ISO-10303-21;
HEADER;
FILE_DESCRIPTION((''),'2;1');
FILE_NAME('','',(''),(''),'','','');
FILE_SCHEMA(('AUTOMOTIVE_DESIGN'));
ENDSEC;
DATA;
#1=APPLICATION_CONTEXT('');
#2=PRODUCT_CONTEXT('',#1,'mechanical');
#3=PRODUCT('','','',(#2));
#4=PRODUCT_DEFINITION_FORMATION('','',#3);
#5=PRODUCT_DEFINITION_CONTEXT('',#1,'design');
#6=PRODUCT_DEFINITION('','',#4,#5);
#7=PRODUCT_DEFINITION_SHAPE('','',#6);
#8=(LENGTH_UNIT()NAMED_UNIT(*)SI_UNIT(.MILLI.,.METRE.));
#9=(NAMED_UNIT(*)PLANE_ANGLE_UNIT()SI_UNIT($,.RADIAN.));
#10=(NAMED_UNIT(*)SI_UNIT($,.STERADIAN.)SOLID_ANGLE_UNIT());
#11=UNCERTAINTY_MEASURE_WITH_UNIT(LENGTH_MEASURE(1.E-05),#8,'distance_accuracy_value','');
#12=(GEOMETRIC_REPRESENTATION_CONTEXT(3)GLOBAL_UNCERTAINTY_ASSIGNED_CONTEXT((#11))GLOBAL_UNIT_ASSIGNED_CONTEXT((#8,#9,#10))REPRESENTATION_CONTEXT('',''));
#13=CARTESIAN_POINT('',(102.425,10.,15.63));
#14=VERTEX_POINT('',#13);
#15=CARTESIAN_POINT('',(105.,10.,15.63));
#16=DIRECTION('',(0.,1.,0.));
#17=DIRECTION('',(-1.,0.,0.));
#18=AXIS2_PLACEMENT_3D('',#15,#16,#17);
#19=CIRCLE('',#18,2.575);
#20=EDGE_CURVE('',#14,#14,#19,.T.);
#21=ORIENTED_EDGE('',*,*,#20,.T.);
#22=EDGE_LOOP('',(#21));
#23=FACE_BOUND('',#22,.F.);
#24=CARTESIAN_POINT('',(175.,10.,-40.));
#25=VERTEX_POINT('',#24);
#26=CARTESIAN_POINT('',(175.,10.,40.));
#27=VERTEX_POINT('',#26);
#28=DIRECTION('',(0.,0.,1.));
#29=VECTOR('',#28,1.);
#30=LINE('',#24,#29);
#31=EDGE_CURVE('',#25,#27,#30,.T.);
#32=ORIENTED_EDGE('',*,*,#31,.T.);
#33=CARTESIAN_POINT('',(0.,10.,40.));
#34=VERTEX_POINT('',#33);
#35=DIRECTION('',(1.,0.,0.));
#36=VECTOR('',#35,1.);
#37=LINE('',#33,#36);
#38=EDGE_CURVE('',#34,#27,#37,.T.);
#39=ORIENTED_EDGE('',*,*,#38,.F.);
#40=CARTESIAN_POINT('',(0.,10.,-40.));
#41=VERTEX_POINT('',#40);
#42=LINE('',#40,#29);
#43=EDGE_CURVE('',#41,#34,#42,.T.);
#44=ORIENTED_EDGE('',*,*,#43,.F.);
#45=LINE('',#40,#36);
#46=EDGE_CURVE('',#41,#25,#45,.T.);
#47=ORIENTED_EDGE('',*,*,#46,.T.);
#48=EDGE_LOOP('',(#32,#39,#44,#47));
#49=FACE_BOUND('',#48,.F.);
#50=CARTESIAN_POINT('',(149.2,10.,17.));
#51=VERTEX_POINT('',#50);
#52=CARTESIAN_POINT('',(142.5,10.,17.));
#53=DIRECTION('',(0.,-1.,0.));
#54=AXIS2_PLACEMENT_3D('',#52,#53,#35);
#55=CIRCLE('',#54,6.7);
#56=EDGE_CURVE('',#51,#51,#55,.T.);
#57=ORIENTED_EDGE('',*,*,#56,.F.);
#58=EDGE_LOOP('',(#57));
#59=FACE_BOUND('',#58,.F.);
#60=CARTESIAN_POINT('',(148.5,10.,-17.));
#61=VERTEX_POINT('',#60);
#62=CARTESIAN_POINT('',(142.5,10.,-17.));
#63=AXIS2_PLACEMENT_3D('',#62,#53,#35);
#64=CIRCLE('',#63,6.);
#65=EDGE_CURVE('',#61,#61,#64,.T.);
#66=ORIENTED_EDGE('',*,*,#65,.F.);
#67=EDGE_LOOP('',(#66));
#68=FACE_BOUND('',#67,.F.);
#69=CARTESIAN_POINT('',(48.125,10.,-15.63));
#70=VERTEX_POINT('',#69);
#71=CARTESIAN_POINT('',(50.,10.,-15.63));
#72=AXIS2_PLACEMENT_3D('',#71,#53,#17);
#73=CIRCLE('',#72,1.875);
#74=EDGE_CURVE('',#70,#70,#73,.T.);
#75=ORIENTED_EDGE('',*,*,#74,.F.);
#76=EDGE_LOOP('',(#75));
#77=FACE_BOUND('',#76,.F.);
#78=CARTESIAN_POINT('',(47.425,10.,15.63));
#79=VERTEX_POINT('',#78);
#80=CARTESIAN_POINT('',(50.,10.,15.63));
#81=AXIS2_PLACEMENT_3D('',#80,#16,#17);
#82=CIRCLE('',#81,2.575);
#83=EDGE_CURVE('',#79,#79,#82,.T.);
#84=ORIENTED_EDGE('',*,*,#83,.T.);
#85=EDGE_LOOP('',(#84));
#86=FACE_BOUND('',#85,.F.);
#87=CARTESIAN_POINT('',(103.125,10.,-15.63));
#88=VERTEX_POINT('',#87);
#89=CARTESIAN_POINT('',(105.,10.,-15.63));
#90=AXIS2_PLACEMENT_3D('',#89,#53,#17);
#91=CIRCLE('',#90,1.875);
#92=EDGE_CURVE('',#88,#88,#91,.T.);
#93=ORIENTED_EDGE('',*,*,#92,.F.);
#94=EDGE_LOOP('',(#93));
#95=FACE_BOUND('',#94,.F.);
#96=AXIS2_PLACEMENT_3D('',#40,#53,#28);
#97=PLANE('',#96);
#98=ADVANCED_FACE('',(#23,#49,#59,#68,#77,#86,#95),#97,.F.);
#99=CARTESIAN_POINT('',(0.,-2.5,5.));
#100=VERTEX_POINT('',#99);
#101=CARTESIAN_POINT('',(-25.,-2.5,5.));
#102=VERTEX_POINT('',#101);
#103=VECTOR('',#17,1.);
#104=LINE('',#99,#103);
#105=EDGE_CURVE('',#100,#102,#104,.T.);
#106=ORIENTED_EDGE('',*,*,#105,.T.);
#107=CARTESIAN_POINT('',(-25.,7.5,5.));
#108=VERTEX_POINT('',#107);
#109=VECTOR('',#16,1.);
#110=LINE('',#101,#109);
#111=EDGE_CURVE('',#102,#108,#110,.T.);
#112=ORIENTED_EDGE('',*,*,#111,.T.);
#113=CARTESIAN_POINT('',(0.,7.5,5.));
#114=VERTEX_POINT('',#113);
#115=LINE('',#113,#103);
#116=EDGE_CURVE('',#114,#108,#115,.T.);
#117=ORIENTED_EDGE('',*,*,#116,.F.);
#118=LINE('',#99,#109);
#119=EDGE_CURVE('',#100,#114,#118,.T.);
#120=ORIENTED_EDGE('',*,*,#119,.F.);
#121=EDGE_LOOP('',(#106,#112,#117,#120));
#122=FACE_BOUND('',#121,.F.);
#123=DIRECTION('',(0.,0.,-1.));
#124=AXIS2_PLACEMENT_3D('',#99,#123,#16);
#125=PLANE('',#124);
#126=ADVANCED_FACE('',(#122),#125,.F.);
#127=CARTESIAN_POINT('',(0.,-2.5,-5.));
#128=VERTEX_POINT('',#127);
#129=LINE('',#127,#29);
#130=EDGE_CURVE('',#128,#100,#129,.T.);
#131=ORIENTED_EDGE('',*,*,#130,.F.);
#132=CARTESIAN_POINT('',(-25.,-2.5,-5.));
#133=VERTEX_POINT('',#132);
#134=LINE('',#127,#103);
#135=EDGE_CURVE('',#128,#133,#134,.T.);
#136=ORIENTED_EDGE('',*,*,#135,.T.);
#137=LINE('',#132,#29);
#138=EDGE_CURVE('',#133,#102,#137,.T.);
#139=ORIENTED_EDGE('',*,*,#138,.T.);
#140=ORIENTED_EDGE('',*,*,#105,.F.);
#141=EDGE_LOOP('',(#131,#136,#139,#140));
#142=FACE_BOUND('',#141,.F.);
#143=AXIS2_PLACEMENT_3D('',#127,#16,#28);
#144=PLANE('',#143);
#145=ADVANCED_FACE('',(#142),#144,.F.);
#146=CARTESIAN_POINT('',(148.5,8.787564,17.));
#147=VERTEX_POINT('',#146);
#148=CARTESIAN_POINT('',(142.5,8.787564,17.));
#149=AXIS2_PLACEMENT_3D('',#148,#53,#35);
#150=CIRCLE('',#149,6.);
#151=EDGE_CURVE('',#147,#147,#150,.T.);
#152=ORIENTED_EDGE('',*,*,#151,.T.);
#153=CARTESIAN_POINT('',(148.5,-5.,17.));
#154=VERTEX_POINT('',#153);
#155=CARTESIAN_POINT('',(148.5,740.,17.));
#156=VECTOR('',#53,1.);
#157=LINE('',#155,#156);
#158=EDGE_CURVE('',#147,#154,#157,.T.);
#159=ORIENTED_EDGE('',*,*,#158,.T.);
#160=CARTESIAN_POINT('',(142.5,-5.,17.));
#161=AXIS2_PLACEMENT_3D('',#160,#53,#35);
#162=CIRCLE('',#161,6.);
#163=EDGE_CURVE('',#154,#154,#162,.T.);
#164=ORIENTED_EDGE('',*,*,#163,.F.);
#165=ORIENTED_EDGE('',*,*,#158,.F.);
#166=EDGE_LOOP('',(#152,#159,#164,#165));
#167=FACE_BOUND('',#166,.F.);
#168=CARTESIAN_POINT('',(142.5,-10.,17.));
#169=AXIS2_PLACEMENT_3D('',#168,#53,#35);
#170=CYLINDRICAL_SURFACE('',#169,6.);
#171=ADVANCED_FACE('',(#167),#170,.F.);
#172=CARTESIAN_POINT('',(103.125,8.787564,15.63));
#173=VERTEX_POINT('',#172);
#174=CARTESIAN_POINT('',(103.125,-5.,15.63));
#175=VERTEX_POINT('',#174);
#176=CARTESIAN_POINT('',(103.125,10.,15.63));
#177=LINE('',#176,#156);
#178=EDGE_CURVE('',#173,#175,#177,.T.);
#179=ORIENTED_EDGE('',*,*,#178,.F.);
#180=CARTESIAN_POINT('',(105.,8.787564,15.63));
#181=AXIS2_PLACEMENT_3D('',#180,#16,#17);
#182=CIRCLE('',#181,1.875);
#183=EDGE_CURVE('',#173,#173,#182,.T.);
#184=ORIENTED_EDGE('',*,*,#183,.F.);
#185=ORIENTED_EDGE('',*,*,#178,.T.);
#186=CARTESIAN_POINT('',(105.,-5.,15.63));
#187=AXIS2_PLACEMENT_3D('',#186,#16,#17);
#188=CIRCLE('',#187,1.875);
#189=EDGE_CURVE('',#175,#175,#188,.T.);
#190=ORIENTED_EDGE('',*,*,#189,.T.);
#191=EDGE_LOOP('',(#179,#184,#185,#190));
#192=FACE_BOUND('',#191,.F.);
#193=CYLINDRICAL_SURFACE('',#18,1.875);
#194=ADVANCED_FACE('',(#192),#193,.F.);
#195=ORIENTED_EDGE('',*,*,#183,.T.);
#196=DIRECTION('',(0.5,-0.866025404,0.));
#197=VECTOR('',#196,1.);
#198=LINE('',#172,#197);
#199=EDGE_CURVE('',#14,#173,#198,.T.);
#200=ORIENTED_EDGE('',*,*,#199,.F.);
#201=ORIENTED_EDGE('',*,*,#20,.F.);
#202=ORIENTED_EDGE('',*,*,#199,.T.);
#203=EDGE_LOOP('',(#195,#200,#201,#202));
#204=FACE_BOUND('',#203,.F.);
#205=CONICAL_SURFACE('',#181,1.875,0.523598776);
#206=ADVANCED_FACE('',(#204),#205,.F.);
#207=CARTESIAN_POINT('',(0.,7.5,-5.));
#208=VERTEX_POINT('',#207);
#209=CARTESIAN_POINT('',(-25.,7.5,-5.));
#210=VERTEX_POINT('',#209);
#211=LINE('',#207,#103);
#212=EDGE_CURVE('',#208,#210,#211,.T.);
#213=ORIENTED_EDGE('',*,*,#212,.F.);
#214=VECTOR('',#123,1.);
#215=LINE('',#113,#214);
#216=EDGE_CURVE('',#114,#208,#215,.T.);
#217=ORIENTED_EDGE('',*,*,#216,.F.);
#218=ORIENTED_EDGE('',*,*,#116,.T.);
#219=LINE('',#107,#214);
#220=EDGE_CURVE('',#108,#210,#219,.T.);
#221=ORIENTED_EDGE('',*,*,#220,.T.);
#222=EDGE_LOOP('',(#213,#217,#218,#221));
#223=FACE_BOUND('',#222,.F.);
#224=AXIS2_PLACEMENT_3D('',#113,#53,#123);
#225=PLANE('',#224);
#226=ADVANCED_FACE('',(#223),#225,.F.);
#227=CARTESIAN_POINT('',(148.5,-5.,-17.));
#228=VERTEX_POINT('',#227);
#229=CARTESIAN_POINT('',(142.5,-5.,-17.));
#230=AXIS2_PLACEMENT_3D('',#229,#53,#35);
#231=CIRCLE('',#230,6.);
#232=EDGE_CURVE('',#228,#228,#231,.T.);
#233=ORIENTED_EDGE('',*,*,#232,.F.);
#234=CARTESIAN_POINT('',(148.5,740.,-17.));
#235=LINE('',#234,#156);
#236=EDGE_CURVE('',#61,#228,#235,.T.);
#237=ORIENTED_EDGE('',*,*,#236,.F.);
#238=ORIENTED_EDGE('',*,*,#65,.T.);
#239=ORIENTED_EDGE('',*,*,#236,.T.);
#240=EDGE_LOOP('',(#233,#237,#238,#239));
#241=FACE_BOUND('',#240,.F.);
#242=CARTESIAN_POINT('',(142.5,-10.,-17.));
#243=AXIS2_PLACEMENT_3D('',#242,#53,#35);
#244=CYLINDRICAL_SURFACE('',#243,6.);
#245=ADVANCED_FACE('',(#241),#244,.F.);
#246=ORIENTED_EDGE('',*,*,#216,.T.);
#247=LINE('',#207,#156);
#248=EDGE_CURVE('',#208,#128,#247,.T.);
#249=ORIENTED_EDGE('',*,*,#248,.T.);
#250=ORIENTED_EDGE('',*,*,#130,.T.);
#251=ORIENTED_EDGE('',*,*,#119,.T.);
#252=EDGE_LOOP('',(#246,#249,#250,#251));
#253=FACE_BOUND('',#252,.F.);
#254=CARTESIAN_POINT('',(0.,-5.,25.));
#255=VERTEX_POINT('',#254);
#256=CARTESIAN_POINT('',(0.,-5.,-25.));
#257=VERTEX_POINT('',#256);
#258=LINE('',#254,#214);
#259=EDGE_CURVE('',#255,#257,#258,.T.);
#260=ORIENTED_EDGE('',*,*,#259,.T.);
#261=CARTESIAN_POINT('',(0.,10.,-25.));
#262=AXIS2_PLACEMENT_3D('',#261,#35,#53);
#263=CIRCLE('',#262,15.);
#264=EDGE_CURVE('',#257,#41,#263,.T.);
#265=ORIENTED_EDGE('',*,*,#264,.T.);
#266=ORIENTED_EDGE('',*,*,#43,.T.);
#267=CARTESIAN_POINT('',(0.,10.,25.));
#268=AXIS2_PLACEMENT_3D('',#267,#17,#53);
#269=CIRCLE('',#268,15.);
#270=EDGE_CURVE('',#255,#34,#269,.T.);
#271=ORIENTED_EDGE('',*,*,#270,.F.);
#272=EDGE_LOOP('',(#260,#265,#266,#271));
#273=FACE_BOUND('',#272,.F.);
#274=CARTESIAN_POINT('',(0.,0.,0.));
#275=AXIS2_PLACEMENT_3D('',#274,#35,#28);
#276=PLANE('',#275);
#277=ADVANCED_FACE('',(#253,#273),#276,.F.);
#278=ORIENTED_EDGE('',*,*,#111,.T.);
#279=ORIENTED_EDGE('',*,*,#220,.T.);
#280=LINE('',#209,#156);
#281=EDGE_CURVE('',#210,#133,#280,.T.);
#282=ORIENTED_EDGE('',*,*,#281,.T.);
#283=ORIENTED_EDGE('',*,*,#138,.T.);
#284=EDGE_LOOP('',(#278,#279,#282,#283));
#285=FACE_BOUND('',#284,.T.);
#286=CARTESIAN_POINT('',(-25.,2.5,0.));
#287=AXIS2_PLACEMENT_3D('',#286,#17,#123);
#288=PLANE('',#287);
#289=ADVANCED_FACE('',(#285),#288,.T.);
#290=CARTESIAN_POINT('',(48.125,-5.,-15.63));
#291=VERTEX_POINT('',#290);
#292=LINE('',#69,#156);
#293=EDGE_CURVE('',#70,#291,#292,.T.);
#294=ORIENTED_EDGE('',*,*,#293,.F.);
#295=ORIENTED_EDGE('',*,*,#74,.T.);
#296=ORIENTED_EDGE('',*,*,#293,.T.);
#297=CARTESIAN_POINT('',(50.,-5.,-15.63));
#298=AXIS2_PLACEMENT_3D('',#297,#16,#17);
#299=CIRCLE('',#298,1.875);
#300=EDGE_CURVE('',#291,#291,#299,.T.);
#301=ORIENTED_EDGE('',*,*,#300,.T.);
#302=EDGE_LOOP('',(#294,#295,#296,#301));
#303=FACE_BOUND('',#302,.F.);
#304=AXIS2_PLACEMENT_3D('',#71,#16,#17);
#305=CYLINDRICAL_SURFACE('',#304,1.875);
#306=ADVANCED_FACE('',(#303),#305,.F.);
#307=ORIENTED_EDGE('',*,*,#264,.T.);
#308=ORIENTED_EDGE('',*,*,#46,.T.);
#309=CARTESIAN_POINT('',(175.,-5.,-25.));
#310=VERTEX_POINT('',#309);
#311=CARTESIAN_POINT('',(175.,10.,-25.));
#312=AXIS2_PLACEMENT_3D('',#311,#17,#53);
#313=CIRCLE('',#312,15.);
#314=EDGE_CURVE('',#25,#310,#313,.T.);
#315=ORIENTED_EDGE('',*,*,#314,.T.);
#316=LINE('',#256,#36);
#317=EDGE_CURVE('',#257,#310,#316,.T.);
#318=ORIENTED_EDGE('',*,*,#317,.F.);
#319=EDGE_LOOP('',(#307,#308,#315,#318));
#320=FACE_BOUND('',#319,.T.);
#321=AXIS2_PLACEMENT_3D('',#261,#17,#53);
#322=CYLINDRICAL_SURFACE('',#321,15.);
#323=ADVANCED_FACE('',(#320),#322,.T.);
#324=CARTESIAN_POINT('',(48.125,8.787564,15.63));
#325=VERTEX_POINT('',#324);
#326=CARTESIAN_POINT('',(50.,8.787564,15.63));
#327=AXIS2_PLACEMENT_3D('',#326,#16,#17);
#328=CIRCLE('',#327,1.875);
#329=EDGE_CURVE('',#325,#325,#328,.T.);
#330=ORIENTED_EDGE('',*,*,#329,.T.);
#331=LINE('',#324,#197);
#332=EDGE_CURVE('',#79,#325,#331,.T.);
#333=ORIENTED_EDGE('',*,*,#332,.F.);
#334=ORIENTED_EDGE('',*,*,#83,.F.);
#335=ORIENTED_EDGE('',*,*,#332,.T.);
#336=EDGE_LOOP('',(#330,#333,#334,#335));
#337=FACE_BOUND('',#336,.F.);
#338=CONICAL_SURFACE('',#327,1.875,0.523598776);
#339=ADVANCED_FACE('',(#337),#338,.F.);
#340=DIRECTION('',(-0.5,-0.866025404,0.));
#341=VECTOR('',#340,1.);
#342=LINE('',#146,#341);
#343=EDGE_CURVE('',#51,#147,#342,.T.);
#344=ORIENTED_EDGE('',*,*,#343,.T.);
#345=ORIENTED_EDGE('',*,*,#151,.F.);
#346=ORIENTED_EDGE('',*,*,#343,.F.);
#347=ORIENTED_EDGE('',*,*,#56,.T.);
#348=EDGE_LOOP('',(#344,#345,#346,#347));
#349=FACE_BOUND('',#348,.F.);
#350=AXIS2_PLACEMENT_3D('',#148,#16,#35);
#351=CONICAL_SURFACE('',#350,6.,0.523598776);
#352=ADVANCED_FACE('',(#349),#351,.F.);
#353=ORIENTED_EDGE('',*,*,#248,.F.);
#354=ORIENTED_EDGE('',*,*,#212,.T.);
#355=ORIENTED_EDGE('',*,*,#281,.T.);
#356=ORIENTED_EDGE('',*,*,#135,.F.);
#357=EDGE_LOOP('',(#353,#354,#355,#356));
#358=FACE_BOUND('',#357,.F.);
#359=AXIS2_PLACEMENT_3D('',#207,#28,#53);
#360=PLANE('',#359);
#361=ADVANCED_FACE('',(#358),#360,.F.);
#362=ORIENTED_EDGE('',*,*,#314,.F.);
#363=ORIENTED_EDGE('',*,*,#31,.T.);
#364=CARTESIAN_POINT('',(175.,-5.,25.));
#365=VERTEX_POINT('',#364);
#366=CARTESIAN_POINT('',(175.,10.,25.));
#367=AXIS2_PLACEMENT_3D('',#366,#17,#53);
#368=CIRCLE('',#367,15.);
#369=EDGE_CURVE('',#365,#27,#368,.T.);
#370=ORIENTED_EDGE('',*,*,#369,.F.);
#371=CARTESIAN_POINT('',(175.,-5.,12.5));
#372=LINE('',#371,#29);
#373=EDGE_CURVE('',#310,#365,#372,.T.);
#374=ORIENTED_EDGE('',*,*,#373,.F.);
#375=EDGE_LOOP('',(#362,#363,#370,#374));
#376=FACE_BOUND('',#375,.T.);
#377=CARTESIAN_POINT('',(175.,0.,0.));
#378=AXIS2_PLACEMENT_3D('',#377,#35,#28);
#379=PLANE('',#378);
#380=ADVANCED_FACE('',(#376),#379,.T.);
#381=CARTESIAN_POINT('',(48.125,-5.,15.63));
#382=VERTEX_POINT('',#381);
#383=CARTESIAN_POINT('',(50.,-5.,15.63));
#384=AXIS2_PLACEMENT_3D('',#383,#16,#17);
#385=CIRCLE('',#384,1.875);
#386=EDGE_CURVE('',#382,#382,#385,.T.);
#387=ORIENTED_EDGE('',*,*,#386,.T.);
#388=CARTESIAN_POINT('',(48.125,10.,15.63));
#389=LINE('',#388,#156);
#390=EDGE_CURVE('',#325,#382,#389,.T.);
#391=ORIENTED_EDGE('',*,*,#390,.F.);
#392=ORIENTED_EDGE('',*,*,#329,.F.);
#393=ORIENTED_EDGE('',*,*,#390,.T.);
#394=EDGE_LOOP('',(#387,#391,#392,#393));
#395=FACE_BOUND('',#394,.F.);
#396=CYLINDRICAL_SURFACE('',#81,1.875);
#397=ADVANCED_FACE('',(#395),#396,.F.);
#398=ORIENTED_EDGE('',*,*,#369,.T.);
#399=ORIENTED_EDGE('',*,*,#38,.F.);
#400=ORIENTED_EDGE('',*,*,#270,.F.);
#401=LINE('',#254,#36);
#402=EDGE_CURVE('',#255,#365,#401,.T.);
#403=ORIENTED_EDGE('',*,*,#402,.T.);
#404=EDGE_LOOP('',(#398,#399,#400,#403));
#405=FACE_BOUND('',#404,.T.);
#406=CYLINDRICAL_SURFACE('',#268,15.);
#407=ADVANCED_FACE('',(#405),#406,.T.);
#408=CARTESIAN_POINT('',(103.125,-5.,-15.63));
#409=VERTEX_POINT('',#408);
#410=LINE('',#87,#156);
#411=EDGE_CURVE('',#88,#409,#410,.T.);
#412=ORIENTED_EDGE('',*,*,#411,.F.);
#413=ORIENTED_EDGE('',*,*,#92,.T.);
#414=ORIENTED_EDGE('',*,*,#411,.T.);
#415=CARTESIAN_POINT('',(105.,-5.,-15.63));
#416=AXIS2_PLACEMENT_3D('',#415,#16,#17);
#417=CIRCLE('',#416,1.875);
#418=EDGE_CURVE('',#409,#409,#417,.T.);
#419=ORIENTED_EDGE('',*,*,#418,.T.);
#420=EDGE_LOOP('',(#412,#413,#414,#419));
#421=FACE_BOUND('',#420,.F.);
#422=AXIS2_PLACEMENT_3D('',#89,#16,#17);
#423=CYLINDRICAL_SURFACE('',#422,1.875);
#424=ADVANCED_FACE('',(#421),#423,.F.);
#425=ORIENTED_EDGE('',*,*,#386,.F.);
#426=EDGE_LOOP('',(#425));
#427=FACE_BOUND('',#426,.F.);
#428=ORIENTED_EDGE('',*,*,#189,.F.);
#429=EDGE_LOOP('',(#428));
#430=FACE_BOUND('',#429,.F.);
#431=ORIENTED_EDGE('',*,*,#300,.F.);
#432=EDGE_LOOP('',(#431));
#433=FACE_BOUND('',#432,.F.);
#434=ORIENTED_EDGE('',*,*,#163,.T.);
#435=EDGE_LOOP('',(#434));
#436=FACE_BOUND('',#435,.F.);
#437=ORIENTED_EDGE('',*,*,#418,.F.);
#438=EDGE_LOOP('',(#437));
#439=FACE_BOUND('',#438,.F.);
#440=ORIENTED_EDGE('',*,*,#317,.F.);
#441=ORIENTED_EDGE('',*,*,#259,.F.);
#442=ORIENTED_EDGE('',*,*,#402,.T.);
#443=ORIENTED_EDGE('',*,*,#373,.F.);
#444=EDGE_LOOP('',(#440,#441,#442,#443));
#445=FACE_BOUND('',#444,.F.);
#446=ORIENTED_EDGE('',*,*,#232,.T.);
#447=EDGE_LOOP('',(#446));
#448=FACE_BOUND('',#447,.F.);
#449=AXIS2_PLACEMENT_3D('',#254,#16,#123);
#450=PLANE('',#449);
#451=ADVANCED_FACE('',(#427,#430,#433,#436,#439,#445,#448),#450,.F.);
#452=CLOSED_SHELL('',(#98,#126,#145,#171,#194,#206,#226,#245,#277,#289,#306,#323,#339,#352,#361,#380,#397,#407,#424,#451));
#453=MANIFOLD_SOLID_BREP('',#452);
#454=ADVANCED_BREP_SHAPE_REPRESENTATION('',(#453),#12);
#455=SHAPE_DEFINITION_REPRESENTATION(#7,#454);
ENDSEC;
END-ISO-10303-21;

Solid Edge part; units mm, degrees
sketch "Sketch1" plane through (0, 0, 0) normal (1, 0, 0) x (0, 1, 0)
  line L0 (-10, -40) -> (10, -40)
  line L1 (10, -40) -> (10, 40)
  line L2 (10, 40) -> (-10, 40)
  line L3 (-10, 40) -> (-10, -40)
  dimension "D1" = 20
  dimension "D2" = 80
extrude "Protrusion1" add sketch "Sketch1" along normal blind 175
sketch "Sketch2" plane through (61, -10, 0) normal (0, -1, 0) x (1, 0, 0)
  circle A0 centre (81.5, 17) radius 6
  dimension "D1" = 23
  dimension "D2" = 12
  dimension "D3" = 142.5
extrude "Cutout1" cut sketch "Sketch2" against normal through all and the other way through all
sketch "Sketch3" plane through (0, 0, 0) normal (-1, 0, 0) x (0, -1, 0)
  arc A0 (5, -25) -> (-10, -40) centre (-10, -25) cw
  line L0 (5, 25) -> (5, -25)
  arc A1 (5, 25) -> (-10, 40) centre (-10, 25) ccw
  dimension "D1" = 50
  dimension "D2" = 15
  dimension "D3" = 15
extrude "Cutout2" cut sketch "Sketch3" against normal through all material side at (0, -0.642, -35.642)
sketch "Sketch4" plane through (0, 2.399, 0) normal (-1, 0, 0) x (0, 0, 1)
  line L0 (-5, -4.899) -> (5, -4.899)
  line L1 (5, -4.899) -> (5, 5.101)
  line L2 (5, 5.101) -> (-5, 5.101)
  line L3 (-5, 5.101) -> (-5, -4.899)
  dimension "D1" = 10
extrude "Extrusionsausprägung_3" add sketch "Sketch4" along normal blind 25
sketch "Sketch5" plane through (86, 10, 0) normal (0, 1, 0) x (-1, 0, 0)
  circle A0 centre (36, 15.63) radius 1.875
  circle A1 centre (-19, 15.63) radius 1.875
  dimension "D1" = 3.75
  dimension "D2" = 37.5
  dimension "D3" = 55
  dimension "D4" = 24.37
  dimension "D5" = 24.37
extrude "Cutout3" cut sketch "Sketch5" against normal through all
chamfer "Fase_1" distance 0.7 angle 60 3 edges at (106.875, 10, 15.63) (142.5, 10, 23) (51.875, 10, 15.63) measured on face at (144.0833, 10, -27.4667)
mirror "Mirror1" about plane through (0, 0, 0) normal (0, 0, 1) of "Cutout1", "Cutout3"
properties part number "C1.1-A" material "Nylon, allgemein"
